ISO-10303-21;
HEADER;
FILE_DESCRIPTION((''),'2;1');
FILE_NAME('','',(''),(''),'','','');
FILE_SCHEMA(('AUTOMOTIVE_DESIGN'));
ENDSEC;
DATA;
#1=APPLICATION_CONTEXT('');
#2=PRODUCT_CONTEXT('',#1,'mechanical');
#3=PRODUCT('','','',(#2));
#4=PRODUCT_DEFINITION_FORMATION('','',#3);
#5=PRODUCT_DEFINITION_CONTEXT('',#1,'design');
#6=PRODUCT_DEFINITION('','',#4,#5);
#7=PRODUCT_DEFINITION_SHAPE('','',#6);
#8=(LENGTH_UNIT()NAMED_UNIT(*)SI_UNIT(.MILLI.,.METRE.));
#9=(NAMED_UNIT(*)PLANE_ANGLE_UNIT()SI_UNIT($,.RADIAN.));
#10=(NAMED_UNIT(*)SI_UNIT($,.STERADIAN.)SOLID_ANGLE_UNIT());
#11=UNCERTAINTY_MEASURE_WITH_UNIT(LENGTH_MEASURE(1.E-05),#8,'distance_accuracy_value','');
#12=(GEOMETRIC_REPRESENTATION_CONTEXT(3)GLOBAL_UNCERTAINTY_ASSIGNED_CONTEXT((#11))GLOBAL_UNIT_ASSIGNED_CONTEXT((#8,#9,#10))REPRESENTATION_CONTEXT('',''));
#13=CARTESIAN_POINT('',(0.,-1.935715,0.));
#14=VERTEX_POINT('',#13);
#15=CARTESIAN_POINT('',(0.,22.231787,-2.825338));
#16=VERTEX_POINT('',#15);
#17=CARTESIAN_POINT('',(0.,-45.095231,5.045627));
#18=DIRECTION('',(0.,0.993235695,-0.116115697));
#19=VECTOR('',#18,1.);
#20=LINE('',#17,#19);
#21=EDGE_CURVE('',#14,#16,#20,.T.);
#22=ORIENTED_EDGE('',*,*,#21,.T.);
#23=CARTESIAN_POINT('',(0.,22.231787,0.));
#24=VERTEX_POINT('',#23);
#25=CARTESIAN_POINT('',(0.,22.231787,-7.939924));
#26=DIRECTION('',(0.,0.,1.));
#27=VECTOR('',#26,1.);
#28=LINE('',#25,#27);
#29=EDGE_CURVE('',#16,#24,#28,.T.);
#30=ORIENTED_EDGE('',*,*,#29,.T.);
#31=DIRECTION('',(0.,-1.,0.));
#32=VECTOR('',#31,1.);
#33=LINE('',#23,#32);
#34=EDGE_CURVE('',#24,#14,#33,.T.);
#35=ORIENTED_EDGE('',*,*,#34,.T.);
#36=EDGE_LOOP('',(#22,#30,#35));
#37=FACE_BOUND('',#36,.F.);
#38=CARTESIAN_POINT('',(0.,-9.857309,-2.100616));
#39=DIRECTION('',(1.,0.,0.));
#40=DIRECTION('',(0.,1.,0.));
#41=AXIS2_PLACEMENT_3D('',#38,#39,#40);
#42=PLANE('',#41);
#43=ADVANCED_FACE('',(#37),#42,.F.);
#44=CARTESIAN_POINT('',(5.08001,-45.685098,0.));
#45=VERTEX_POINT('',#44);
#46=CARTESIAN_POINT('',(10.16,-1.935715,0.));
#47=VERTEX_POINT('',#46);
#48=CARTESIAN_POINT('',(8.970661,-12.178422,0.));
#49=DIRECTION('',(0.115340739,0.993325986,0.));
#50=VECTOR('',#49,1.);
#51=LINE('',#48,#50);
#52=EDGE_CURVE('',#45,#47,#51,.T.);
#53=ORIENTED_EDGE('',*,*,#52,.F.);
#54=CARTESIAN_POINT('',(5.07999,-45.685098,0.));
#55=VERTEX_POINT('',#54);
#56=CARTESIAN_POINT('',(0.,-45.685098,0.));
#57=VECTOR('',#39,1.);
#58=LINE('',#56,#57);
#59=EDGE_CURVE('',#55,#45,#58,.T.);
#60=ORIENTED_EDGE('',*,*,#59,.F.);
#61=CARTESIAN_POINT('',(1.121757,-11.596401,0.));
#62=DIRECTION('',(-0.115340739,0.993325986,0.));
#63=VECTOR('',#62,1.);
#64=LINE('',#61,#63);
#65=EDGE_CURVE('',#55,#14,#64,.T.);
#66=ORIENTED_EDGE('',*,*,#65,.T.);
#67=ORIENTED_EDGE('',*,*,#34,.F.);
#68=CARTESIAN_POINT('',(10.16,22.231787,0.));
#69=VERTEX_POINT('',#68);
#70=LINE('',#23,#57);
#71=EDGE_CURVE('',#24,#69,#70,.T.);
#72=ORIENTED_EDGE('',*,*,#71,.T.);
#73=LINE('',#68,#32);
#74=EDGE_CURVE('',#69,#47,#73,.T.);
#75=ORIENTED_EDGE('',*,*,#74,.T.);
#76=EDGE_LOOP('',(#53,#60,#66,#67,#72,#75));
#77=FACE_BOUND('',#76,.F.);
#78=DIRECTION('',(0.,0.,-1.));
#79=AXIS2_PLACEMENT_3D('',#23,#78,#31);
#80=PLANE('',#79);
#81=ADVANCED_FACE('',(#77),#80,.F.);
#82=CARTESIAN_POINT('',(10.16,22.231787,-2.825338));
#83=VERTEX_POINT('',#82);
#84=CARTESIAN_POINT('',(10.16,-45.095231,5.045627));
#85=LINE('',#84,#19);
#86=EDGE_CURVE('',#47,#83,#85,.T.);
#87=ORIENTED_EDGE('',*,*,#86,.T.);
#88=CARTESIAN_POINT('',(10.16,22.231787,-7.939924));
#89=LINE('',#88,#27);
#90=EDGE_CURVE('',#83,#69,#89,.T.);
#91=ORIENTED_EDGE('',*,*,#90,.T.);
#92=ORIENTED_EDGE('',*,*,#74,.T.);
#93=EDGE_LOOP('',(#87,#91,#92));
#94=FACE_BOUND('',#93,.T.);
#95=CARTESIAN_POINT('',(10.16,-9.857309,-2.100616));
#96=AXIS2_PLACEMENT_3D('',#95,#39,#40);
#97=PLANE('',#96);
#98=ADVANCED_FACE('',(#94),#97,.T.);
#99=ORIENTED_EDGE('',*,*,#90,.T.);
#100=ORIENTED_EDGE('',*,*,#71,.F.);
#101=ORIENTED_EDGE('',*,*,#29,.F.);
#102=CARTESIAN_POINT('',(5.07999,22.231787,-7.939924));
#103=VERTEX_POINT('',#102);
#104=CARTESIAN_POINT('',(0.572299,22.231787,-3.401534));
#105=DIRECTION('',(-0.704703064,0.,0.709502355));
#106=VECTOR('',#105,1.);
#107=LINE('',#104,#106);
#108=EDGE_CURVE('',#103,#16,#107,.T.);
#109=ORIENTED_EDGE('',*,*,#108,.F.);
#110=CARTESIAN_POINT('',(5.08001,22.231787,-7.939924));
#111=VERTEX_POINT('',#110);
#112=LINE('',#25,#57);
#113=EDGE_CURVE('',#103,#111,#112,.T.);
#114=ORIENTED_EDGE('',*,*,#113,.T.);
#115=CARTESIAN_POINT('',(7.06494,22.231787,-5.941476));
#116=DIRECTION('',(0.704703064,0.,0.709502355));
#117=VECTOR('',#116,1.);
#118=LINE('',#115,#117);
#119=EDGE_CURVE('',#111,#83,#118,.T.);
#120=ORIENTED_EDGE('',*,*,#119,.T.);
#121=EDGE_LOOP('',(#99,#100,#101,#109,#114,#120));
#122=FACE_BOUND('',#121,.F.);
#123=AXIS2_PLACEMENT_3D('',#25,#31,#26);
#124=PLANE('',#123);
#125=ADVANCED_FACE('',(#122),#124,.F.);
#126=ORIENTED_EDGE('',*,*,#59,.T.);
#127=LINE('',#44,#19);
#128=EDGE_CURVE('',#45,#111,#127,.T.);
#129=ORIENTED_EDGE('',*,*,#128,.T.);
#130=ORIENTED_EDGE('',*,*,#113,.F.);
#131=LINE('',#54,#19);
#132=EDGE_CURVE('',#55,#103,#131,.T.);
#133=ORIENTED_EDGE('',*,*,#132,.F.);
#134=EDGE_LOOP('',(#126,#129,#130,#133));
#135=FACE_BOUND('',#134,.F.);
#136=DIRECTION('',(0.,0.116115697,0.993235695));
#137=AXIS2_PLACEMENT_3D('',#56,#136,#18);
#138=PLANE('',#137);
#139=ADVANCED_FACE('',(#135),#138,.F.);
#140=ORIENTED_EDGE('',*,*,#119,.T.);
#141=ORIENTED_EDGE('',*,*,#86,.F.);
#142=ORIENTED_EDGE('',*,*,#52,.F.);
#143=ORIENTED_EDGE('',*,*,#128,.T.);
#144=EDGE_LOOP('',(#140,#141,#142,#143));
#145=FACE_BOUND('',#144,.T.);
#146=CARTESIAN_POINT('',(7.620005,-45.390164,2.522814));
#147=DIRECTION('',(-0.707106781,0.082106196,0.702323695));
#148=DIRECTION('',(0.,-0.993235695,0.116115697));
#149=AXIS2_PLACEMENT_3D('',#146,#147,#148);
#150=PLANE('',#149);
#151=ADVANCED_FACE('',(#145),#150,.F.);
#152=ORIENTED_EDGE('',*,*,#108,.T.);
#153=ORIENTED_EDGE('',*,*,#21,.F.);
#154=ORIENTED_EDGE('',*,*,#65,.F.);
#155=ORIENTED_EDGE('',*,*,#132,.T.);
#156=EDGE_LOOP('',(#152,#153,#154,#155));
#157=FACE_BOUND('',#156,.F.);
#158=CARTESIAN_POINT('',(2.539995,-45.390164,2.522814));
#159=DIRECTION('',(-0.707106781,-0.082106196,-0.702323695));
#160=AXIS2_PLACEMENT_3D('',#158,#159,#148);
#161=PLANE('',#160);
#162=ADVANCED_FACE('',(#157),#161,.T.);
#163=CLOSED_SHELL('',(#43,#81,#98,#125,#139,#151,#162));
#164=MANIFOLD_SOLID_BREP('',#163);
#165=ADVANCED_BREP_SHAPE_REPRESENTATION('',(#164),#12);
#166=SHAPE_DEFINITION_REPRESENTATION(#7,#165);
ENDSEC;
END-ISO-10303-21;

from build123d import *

# Parameters (mm, degrees)
F1_DEPTH = 10.16
F2_SIZE  = 5.07999


# Not quite as in the source:
# - a fillet or chamfer is up to 0.001 mm smaller than in the source, because OpenCascade refuses the exact size


with BuildPart() as f1:
    # F0 (on Right) → F1 (new body)
    with BuildSketch(Plane.YZ):
        Polygon((-45.6850975752, 0), (22.2317874432, -7.939924486), (22.2317874432, 0), align=None)
    extrude(amount=F1_DEPTH)

    # F2 (size 5.08 in the source; OpenCascade refuses exactly that, so slightly less here)
    f2_edges = [f1.edges().sort_by_distance(p)[0] for p in [
        (10.16, -11.726655, -3.969962),
        (0, -11.726655, -3.969962),
    ]]
    chamfer(f2_edges, length=F2_SIZE)


solid = f1.part
